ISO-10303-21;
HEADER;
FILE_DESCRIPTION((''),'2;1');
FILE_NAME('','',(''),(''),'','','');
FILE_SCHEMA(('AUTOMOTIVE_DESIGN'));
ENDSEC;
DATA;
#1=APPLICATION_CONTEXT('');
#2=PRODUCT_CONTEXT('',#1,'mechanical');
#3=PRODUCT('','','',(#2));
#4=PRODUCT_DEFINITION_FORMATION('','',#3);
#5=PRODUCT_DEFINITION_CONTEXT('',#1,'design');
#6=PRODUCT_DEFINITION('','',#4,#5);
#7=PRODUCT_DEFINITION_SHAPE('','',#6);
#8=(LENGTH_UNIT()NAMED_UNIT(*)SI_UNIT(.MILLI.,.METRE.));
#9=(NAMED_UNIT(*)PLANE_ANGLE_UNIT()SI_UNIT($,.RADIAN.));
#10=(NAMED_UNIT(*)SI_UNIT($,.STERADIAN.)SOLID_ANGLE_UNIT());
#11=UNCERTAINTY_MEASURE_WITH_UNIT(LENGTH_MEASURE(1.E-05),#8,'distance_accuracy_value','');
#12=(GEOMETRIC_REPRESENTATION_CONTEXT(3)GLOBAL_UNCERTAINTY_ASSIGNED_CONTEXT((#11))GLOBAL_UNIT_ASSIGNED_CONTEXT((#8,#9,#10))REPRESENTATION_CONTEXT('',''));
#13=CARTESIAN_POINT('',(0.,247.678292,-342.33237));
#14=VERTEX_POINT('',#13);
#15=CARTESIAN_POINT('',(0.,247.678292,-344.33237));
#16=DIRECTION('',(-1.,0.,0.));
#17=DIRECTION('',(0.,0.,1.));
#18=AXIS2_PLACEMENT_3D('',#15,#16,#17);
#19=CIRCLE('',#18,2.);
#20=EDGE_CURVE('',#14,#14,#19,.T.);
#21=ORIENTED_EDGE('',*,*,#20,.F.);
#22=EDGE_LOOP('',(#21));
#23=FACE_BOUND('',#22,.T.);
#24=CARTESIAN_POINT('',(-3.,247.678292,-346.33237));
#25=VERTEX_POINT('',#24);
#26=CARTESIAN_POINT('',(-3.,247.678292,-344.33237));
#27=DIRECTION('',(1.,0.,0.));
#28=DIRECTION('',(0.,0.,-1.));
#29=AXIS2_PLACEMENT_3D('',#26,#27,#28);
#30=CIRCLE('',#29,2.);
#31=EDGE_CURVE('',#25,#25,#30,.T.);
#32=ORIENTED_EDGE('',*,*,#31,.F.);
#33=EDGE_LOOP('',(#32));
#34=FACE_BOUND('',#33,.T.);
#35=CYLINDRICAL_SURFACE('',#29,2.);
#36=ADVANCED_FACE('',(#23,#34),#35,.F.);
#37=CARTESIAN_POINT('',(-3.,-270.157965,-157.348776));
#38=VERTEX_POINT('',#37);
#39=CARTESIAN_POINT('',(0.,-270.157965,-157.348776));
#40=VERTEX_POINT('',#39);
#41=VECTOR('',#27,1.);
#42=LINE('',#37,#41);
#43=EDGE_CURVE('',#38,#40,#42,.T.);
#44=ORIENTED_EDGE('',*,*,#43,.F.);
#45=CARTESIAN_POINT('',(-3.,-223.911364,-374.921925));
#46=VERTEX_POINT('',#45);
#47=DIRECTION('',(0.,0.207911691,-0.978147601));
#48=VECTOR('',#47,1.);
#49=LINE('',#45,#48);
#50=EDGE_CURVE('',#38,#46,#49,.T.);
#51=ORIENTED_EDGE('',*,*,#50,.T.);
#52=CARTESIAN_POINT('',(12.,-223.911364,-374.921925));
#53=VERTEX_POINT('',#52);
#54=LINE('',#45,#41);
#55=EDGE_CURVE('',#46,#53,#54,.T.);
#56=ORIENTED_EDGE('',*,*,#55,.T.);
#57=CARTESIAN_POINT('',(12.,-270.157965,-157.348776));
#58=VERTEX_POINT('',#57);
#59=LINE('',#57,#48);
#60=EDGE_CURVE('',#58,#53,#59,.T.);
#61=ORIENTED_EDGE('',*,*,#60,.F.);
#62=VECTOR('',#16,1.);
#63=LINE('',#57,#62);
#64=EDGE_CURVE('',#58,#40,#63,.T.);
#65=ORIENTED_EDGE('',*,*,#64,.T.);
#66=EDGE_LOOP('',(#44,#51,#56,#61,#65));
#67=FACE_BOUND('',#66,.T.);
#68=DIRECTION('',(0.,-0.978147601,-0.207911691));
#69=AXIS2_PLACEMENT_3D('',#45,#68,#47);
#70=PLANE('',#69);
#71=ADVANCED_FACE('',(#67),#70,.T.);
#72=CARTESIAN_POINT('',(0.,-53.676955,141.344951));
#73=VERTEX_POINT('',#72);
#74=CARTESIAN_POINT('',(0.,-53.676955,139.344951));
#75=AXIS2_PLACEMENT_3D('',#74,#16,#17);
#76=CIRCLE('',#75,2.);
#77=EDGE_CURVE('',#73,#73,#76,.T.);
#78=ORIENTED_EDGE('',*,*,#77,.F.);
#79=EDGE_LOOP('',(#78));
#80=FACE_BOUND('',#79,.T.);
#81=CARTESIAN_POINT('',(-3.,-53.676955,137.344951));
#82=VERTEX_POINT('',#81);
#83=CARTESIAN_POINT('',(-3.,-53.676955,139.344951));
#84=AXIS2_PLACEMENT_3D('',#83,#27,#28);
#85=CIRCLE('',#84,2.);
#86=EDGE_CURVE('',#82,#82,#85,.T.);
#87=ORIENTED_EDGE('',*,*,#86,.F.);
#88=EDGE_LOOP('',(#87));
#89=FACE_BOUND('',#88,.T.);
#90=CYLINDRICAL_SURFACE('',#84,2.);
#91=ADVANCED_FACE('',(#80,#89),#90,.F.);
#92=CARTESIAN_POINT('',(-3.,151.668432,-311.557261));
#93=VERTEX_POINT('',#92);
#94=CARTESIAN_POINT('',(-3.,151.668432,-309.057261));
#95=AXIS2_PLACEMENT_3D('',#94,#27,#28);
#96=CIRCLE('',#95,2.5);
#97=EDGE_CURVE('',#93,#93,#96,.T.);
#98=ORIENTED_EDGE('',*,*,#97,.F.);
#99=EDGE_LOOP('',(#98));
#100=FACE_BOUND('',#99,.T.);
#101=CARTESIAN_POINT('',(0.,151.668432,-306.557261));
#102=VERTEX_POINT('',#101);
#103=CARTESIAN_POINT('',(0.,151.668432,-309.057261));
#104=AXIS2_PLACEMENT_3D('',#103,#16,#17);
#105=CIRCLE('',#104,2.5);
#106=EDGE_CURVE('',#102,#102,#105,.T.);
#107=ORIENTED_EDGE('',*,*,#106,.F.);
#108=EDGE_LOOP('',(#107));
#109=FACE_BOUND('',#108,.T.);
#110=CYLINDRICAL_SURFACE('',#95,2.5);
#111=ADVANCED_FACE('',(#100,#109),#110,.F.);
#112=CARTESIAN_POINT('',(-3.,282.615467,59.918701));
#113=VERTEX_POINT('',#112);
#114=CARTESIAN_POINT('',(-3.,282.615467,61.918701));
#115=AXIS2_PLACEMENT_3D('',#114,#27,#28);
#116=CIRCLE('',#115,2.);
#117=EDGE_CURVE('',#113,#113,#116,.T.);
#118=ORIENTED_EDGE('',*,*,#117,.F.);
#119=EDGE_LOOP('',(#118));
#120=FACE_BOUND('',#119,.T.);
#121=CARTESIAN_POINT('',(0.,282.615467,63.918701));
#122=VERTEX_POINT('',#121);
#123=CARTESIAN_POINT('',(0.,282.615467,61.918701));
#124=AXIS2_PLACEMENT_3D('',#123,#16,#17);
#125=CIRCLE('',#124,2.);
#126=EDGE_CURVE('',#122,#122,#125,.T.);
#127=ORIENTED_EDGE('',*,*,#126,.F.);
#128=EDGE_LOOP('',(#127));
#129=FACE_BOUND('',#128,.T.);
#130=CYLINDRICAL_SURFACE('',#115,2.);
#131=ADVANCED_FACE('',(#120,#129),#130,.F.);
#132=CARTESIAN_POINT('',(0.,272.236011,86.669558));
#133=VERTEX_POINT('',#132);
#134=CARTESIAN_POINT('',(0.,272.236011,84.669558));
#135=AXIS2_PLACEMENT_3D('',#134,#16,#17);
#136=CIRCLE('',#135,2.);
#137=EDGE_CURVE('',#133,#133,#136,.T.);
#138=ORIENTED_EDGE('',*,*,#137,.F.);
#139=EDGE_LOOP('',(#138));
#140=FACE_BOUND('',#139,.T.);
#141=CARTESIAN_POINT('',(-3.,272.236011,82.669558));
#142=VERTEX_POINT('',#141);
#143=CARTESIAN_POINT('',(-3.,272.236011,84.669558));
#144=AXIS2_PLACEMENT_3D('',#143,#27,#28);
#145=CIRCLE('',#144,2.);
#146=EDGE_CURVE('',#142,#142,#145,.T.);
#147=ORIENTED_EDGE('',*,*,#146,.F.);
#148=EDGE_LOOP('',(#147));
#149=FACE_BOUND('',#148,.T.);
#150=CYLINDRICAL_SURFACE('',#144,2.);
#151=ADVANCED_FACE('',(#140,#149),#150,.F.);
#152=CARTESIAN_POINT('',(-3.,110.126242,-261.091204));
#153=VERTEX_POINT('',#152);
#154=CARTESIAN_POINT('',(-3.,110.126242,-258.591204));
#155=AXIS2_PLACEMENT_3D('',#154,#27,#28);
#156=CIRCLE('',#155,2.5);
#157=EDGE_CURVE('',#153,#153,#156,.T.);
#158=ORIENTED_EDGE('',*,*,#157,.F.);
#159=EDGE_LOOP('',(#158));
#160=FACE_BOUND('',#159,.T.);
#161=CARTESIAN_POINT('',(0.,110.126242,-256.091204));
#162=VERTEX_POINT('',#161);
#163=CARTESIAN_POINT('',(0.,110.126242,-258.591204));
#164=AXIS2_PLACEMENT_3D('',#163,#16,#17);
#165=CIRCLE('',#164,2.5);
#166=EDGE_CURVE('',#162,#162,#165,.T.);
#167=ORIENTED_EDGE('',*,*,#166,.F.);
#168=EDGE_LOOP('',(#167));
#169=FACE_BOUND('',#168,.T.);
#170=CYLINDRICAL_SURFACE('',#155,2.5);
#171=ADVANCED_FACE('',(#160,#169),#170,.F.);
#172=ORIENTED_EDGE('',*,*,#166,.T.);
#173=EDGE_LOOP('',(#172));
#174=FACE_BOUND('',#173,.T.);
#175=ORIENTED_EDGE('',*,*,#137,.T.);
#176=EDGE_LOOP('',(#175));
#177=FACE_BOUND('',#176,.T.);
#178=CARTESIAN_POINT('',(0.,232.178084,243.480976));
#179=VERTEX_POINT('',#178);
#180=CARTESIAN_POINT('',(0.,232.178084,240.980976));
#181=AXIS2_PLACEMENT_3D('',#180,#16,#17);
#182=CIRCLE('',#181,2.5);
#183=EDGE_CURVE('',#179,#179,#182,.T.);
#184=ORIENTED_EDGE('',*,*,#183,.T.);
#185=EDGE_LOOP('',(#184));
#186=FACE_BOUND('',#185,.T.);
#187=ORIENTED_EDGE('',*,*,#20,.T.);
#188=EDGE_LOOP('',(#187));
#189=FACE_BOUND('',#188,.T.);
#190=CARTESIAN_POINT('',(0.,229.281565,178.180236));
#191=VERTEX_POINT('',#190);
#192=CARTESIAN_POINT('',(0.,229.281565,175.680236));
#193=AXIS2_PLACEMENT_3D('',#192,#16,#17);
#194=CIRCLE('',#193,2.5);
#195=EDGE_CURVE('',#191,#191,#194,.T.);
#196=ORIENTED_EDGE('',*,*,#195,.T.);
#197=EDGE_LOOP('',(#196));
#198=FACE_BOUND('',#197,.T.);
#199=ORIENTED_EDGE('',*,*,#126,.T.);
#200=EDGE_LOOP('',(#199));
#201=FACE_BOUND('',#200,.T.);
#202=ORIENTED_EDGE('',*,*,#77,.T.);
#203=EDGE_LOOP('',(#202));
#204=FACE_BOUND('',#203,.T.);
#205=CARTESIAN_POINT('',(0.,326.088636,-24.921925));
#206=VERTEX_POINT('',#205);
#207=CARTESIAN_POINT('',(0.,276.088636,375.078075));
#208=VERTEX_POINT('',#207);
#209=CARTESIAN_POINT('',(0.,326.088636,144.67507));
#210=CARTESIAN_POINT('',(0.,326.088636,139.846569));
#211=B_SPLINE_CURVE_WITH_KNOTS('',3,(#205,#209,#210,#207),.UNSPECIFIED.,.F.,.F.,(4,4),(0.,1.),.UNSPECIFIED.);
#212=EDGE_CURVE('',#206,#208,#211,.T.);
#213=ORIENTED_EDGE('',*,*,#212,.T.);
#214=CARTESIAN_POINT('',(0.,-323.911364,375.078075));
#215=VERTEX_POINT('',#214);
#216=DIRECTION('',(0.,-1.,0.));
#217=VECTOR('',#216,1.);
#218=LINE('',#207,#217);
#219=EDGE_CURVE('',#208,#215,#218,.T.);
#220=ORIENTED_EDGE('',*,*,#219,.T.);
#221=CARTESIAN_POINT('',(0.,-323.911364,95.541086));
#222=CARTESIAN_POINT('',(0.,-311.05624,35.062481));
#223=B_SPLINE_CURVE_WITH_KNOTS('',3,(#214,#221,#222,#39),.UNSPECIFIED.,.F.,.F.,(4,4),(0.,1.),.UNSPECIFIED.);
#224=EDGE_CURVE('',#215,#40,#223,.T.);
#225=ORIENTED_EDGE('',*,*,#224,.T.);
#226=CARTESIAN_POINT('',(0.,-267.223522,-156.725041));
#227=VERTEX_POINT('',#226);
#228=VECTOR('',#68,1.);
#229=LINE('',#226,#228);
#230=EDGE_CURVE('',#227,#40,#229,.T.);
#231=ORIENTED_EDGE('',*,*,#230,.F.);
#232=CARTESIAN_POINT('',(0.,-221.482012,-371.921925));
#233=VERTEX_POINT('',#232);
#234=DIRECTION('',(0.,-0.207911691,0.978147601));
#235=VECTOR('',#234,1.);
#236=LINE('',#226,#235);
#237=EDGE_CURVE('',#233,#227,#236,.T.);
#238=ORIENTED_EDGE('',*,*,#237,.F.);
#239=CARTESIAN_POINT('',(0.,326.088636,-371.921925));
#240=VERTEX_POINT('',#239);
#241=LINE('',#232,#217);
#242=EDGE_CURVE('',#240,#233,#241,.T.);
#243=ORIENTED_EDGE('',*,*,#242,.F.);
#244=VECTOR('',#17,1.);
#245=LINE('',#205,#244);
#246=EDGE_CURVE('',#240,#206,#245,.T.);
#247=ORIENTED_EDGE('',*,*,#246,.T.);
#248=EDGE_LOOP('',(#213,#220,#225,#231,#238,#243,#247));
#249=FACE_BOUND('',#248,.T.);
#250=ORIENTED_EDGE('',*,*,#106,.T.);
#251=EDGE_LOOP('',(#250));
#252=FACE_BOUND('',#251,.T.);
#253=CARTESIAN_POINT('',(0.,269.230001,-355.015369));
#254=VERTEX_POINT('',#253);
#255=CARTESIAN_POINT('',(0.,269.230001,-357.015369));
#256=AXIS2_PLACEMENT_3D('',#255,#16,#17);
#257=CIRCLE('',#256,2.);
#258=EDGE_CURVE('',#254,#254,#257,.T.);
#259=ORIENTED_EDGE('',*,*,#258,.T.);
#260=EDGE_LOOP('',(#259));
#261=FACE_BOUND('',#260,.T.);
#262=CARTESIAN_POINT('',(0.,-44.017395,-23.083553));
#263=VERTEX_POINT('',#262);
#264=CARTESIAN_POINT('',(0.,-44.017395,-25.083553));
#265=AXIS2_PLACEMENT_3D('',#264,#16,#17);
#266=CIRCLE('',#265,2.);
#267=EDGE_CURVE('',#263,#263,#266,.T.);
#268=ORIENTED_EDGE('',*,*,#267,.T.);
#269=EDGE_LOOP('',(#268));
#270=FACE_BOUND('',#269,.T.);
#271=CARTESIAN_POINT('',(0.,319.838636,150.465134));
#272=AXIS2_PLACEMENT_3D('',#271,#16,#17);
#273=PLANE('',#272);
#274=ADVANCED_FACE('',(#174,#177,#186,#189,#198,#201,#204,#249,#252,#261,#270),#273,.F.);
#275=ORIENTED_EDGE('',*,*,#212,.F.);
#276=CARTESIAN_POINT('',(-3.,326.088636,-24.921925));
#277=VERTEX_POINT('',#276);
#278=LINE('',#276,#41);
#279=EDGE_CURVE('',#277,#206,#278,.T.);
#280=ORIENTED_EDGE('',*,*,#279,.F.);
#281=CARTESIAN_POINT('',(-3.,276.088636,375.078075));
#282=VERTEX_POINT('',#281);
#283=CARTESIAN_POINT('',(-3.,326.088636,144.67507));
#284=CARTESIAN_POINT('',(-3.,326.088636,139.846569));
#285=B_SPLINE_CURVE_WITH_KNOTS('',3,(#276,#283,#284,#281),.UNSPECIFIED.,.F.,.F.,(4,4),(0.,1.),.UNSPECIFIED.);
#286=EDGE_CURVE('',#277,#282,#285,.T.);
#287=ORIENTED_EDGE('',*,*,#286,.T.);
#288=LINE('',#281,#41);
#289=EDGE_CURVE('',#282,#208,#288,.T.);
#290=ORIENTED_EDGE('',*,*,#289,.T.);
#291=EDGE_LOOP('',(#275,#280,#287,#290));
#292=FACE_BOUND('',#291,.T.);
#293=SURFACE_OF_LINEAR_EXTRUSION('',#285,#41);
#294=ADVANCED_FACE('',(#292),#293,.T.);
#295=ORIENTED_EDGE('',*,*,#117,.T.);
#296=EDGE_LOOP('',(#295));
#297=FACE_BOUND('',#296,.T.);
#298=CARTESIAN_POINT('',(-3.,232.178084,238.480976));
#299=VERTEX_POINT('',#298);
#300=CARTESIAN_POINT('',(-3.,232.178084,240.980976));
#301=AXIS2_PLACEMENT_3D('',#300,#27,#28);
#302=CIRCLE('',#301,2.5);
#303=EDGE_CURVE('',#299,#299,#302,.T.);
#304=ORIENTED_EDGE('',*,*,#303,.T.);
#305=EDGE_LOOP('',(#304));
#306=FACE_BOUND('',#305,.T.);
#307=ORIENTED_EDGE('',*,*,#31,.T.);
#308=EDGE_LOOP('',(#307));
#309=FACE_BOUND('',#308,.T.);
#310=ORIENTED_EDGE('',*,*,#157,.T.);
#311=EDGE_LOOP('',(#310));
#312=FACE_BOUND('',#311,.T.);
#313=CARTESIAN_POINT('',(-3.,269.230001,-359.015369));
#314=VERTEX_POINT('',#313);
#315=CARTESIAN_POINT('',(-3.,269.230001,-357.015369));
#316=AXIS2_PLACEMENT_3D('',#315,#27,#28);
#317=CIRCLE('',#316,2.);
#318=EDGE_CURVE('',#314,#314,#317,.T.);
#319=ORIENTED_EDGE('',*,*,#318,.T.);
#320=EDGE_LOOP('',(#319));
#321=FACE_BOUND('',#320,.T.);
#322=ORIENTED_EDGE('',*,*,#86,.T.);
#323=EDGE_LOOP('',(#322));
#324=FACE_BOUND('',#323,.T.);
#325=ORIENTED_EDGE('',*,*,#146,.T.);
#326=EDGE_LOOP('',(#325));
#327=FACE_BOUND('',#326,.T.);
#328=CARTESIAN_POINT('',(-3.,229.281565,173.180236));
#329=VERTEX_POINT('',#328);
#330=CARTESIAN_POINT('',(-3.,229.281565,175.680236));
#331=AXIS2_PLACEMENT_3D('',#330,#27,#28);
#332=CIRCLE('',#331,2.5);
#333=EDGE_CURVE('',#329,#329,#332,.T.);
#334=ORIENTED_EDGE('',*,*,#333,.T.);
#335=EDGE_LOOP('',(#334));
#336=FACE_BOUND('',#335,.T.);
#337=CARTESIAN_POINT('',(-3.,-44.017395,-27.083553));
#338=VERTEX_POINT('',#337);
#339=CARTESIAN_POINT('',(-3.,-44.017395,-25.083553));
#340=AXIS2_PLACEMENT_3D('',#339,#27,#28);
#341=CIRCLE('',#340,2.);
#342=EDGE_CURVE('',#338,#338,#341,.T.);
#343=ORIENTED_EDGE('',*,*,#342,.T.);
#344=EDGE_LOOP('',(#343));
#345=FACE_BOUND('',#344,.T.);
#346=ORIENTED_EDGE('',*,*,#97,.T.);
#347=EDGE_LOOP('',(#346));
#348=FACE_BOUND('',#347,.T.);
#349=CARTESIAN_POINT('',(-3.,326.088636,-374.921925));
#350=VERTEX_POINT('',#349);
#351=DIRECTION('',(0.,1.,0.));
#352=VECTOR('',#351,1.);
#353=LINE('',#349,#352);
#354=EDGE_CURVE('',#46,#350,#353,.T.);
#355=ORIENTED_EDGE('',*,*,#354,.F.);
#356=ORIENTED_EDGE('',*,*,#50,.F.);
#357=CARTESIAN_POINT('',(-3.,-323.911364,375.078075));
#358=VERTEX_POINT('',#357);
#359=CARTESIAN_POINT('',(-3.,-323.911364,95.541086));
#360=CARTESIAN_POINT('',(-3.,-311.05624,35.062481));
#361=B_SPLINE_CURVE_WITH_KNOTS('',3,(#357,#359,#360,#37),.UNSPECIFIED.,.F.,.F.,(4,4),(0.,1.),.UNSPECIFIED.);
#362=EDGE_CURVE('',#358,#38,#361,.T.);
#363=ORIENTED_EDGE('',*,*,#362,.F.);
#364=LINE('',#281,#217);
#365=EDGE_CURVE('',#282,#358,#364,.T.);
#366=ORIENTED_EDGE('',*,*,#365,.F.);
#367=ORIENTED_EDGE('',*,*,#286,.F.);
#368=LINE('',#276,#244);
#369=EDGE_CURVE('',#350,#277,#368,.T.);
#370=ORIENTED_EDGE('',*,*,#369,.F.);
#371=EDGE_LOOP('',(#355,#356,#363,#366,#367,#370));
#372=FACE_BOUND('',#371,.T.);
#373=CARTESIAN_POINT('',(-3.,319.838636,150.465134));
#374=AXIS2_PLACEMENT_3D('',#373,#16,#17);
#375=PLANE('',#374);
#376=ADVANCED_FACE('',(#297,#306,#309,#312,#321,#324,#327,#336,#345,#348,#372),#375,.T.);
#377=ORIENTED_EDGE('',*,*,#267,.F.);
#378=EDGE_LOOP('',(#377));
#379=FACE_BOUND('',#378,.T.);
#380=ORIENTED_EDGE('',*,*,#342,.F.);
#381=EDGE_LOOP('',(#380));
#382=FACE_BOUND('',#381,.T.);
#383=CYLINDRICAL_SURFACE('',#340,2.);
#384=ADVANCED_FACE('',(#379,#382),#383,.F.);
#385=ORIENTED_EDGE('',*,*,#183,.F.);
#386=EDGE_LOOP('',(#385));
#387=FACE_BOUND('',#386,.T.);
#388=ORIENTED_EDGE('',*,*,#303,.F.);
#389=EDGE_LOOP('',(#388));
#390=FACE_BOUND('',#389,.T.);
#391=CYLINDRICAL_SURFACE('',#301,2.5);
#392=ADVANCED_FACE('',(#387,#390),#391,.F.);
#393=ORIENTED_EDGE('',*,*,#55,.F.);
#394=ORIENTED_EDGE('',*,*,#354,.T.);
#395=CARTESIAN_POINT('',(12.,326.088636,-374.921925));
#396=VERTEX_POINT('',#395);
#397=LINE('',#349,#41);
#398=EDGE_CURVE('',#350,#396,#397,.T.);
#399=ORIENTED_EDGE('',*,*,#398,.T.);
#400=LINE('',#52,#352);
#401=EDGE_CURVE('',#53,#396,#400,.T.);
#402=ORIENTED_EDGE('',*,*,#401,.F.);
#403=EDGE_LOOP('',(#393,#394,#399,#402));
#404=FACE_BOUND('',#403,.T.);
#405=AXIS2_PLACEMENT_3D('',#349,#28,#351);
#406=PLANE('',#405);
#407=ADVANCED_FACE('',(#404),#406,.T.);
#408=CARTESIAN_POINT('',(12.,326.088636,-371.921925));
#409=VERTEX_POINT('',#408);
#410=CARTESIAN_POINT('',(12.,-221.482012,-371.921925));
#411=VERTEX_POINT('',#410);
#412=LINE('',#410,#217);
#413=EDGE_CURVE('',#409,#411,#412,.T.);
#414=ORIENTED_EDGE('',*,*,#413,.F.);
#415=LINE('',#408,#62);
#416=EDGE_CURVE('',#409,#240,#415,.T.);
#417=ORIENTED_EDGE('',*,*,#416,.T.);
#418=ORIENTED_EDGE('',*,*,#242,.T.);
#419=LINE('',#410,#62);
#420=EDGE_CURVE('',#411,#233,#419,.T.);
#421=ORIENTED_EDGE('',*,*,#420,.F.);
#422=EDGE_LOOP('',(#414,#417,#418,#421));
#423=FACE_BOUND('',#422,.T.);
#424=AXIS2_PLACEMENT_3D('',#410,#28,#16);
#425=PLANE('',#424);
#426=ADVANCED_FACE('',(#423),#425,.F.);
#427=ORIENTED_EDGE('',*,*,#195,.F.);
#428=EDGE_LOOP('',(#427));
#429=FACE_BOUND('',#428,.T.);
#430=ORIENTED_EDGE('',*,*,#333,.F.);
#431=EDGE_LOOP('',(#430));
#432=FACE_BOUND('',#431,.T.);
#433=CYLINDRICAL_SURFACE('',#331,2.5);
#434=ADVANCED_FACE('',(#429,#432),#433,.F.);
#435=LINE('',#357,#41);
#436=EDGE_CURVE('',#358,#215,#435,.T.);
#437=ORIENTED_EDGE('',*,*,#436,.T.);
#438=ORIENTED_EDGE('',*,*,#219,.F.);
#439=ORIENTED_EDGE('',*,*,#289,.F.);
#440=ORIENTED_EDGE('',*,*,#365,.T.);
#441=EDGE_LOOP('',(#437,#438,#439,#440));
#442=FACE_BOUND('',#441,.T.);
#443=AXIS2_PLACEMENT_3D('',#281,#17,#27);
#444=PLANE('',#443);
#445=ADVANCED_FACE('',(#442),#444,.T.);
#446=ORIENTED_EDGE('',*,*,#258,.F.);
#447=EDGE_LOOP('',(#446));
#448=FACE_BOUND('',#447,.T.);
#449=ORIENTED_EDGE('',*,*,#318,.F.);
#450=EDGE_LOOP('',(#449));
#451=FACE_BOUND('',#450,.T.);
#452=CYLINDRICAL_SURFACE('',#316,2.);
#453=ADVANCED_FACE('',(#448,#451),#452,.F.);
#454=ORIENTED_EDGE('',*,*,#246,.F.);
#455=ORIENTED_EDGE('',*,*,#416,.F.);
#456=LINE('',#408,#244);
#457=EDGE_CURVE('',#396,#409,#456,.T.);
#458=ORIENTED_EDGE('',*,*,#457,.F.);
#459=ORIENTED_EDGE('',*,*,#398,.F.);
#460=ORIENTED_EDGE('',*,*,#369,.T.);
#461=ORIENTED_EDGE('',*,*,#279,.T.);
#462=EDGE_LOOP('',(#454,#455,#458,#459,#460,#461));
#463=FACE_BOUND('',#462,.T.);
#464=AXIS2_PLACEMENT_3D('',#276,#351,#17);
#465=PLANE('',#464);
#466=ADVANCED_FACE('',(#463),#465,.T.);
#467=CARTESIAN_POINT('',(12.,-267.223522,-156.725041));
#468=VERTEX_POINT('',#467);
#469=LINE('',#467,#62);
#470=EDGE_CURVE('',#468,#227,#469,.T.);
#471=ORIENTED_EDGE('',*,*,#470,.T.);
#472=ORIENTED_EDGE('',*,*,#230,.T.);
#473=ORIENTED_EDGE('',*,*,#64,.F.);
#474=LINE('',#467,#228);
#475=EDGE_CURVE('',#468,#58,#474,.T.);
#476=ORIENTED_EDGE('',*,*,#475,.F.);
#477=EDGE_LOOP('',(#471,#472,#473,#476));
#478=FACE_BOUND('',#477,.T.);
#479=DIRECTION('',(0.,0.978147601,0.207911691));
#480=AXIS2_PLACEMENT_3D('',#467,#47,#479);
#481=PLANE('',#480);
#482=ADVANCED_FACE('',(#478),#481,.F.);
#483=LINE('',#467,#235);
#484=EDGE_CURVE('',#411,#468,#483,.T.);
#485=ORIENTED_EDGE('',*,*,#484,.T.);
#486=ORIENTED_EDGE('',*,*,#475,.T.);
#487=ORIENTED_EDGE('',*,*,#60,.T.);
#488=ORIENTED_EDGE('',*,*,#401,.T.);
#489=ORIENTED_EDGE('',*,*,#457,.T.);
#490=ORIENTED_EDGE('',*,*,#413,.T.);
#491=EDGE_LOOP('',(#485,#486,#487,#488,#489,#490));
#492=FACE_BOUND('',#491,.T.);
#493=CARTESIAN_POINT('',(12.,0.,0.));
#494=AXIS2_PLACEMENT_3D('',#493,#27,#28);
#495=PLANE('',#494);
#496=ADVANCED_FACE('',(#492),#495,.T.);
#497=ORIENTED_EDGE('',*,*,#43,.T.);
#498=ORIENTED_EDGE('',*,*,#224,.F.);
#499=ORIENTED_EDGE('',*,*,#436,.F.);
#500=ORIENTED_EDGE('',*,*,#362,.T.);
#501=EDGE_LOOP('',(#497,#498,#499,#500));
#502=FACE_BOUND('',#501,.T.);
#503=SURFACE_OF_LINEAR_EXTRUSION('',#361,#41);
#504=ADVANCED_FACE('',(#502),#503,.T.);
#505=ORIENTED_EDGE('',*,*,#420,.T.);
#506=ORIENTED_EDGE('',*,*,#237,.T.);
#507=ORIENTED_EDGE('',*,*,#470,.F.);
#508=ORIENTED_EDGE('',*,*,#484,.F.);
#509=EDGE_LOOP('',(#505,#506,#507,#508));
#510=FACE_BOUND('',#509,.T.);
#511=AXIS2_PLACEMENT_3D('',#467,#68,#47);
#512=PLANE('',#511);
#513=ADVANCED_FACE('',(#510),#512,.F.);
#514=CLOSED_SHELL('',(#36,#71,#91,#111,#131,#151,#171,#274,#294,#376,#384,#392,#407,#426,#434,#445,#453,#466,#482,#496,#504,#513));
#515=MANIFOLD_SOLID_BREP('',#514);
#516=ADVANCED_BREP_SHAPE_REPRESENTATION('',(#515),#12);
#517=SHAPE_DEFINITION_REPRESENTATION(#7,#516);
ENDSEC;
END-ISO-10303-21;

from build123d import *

# Parameters (mm, degrees)
BOSS_EXTRUDE1_START     = -3
BOSS_EXTRUDE1_DEPTH     = 3
BOSS_EXTRUDE2_DEPTH     = 12
CUT_EXTRUDE1_DEPTH      = 498.153256686
CUT_EXTRUDE1_DEPTH_BACK = 498.153256686
SKETCH4_R               = 2
SKETCH4_R_2             = 2.5


# Read off the part's stored shape, not the designer's step: Boss-Extrude1
with BuildPart() as part:
    # Boss-Extrude1 outline → Boss-Extrude1 (new body)
    with BuildSketch(Plane(origin=(0, 0, 0), x_dir=(0, 0, -1), z_dir=(1, 0, 0)).offset(BOSS_EXTRUDE1_START)):
        with BuildLine():
            Line((374.921925096, 326.088635526), (24.921925096, 326.088635526))
            add(Edge.make_bspline(
                [(24.921925096, 326.088635526), (-144.675070379, 326.088635526), (-139.84656943, 326.088635526), (-375.078074904, 276.088635526)],
                knots=[0, 0, 0, 0, 1, 1, 1, 1], degree=3))
            Line((-375.078074904, 276.088635526), (-375.078074904, -323.911364474))
            add(Edge.make_bspline(
                [(-375.078074904, -323.911364474), (-95.541085852, -323.911364474), (-35.062480537, -311.056240074), (157.348776273, -270.157964899)],
                knots=[0, 0, 0, 0, 1, 1, 1, 1], degree=3))
            Line((157.348776273, -270.157964899), (374.921925096, -223.911364474))
            Line((374.921925096, -223.911364474), (374.921925096, 326.088635526))
        make_face()
    extrude(amount=BOSS_EXTRUDE1_DEPTH)

    # Sketch3 → Boss-Extrude2 (add)
    with BuildSketch(Plane(origin=(0, 0, 0), x_dir=(0, 0, -1), z_dir=(1, 0, 0))):
        Polygon((157.348776273, -270.157964899), (374.921925096, -223.911364474), (374.921925096, 326.088635526), (371.921925096, 326.088635526), (371.921925096, -221.482012374), (156.725041201, -267.223522097), align=None)
    extrude(amount=BOSS_EXTRUDE2_DEPTH)

    # Sketch4 → Cut-Extrude1 (cut, two sides: drawn at the far end of the back side and taken through both)
    with BuildSketch(Plane(origin=(0, 0, 0), x_dir=(0, 0, -1), z_dir=(1, 0, 0)).offset(-CUT_EXTRUDE1_DEPTH_BACK)):
        with Locations((25.083553444, -44.01739539)):
            Circle(SKETCH4_R)
        with Locations((357.01536917, 269.230000887)):
            Circle(SKETCH4_R)
        with Locations((344.332369965, 247.678292183)):
            Circle(SKETCH4_R)
        with Locations((309.057260956, 151.668432327)):
            Circle(SKETCH4_R_2)
        with Locations((258.591204121, 110.126241652)):
            Circle(SKETCH4_R_2)
        with Locations((-61.91870145, 282.615467423)):
            Circle(SKETCH4_R)
        with Locations((-84.669558452, 272.236010663)):
            Circle(SKETCH4_R)
        with Locations((-175.680236141, 229.281564523)):
            Circle(SKETCH4_R_2)
        with Locations((-240.980976375, 232.178083695)):
            Circle(SKETCH4_R_2)
        with Locations((-139.344950951, -53.676954932)):
            Circle(SKETCH4_R)
    extrude(amount=CUT_EXTRUDE1_DEPTH + CUT_EXTRUDE1_DEPTH_BACK, mode=Mode.SUBTRACT)


solid = part.part
